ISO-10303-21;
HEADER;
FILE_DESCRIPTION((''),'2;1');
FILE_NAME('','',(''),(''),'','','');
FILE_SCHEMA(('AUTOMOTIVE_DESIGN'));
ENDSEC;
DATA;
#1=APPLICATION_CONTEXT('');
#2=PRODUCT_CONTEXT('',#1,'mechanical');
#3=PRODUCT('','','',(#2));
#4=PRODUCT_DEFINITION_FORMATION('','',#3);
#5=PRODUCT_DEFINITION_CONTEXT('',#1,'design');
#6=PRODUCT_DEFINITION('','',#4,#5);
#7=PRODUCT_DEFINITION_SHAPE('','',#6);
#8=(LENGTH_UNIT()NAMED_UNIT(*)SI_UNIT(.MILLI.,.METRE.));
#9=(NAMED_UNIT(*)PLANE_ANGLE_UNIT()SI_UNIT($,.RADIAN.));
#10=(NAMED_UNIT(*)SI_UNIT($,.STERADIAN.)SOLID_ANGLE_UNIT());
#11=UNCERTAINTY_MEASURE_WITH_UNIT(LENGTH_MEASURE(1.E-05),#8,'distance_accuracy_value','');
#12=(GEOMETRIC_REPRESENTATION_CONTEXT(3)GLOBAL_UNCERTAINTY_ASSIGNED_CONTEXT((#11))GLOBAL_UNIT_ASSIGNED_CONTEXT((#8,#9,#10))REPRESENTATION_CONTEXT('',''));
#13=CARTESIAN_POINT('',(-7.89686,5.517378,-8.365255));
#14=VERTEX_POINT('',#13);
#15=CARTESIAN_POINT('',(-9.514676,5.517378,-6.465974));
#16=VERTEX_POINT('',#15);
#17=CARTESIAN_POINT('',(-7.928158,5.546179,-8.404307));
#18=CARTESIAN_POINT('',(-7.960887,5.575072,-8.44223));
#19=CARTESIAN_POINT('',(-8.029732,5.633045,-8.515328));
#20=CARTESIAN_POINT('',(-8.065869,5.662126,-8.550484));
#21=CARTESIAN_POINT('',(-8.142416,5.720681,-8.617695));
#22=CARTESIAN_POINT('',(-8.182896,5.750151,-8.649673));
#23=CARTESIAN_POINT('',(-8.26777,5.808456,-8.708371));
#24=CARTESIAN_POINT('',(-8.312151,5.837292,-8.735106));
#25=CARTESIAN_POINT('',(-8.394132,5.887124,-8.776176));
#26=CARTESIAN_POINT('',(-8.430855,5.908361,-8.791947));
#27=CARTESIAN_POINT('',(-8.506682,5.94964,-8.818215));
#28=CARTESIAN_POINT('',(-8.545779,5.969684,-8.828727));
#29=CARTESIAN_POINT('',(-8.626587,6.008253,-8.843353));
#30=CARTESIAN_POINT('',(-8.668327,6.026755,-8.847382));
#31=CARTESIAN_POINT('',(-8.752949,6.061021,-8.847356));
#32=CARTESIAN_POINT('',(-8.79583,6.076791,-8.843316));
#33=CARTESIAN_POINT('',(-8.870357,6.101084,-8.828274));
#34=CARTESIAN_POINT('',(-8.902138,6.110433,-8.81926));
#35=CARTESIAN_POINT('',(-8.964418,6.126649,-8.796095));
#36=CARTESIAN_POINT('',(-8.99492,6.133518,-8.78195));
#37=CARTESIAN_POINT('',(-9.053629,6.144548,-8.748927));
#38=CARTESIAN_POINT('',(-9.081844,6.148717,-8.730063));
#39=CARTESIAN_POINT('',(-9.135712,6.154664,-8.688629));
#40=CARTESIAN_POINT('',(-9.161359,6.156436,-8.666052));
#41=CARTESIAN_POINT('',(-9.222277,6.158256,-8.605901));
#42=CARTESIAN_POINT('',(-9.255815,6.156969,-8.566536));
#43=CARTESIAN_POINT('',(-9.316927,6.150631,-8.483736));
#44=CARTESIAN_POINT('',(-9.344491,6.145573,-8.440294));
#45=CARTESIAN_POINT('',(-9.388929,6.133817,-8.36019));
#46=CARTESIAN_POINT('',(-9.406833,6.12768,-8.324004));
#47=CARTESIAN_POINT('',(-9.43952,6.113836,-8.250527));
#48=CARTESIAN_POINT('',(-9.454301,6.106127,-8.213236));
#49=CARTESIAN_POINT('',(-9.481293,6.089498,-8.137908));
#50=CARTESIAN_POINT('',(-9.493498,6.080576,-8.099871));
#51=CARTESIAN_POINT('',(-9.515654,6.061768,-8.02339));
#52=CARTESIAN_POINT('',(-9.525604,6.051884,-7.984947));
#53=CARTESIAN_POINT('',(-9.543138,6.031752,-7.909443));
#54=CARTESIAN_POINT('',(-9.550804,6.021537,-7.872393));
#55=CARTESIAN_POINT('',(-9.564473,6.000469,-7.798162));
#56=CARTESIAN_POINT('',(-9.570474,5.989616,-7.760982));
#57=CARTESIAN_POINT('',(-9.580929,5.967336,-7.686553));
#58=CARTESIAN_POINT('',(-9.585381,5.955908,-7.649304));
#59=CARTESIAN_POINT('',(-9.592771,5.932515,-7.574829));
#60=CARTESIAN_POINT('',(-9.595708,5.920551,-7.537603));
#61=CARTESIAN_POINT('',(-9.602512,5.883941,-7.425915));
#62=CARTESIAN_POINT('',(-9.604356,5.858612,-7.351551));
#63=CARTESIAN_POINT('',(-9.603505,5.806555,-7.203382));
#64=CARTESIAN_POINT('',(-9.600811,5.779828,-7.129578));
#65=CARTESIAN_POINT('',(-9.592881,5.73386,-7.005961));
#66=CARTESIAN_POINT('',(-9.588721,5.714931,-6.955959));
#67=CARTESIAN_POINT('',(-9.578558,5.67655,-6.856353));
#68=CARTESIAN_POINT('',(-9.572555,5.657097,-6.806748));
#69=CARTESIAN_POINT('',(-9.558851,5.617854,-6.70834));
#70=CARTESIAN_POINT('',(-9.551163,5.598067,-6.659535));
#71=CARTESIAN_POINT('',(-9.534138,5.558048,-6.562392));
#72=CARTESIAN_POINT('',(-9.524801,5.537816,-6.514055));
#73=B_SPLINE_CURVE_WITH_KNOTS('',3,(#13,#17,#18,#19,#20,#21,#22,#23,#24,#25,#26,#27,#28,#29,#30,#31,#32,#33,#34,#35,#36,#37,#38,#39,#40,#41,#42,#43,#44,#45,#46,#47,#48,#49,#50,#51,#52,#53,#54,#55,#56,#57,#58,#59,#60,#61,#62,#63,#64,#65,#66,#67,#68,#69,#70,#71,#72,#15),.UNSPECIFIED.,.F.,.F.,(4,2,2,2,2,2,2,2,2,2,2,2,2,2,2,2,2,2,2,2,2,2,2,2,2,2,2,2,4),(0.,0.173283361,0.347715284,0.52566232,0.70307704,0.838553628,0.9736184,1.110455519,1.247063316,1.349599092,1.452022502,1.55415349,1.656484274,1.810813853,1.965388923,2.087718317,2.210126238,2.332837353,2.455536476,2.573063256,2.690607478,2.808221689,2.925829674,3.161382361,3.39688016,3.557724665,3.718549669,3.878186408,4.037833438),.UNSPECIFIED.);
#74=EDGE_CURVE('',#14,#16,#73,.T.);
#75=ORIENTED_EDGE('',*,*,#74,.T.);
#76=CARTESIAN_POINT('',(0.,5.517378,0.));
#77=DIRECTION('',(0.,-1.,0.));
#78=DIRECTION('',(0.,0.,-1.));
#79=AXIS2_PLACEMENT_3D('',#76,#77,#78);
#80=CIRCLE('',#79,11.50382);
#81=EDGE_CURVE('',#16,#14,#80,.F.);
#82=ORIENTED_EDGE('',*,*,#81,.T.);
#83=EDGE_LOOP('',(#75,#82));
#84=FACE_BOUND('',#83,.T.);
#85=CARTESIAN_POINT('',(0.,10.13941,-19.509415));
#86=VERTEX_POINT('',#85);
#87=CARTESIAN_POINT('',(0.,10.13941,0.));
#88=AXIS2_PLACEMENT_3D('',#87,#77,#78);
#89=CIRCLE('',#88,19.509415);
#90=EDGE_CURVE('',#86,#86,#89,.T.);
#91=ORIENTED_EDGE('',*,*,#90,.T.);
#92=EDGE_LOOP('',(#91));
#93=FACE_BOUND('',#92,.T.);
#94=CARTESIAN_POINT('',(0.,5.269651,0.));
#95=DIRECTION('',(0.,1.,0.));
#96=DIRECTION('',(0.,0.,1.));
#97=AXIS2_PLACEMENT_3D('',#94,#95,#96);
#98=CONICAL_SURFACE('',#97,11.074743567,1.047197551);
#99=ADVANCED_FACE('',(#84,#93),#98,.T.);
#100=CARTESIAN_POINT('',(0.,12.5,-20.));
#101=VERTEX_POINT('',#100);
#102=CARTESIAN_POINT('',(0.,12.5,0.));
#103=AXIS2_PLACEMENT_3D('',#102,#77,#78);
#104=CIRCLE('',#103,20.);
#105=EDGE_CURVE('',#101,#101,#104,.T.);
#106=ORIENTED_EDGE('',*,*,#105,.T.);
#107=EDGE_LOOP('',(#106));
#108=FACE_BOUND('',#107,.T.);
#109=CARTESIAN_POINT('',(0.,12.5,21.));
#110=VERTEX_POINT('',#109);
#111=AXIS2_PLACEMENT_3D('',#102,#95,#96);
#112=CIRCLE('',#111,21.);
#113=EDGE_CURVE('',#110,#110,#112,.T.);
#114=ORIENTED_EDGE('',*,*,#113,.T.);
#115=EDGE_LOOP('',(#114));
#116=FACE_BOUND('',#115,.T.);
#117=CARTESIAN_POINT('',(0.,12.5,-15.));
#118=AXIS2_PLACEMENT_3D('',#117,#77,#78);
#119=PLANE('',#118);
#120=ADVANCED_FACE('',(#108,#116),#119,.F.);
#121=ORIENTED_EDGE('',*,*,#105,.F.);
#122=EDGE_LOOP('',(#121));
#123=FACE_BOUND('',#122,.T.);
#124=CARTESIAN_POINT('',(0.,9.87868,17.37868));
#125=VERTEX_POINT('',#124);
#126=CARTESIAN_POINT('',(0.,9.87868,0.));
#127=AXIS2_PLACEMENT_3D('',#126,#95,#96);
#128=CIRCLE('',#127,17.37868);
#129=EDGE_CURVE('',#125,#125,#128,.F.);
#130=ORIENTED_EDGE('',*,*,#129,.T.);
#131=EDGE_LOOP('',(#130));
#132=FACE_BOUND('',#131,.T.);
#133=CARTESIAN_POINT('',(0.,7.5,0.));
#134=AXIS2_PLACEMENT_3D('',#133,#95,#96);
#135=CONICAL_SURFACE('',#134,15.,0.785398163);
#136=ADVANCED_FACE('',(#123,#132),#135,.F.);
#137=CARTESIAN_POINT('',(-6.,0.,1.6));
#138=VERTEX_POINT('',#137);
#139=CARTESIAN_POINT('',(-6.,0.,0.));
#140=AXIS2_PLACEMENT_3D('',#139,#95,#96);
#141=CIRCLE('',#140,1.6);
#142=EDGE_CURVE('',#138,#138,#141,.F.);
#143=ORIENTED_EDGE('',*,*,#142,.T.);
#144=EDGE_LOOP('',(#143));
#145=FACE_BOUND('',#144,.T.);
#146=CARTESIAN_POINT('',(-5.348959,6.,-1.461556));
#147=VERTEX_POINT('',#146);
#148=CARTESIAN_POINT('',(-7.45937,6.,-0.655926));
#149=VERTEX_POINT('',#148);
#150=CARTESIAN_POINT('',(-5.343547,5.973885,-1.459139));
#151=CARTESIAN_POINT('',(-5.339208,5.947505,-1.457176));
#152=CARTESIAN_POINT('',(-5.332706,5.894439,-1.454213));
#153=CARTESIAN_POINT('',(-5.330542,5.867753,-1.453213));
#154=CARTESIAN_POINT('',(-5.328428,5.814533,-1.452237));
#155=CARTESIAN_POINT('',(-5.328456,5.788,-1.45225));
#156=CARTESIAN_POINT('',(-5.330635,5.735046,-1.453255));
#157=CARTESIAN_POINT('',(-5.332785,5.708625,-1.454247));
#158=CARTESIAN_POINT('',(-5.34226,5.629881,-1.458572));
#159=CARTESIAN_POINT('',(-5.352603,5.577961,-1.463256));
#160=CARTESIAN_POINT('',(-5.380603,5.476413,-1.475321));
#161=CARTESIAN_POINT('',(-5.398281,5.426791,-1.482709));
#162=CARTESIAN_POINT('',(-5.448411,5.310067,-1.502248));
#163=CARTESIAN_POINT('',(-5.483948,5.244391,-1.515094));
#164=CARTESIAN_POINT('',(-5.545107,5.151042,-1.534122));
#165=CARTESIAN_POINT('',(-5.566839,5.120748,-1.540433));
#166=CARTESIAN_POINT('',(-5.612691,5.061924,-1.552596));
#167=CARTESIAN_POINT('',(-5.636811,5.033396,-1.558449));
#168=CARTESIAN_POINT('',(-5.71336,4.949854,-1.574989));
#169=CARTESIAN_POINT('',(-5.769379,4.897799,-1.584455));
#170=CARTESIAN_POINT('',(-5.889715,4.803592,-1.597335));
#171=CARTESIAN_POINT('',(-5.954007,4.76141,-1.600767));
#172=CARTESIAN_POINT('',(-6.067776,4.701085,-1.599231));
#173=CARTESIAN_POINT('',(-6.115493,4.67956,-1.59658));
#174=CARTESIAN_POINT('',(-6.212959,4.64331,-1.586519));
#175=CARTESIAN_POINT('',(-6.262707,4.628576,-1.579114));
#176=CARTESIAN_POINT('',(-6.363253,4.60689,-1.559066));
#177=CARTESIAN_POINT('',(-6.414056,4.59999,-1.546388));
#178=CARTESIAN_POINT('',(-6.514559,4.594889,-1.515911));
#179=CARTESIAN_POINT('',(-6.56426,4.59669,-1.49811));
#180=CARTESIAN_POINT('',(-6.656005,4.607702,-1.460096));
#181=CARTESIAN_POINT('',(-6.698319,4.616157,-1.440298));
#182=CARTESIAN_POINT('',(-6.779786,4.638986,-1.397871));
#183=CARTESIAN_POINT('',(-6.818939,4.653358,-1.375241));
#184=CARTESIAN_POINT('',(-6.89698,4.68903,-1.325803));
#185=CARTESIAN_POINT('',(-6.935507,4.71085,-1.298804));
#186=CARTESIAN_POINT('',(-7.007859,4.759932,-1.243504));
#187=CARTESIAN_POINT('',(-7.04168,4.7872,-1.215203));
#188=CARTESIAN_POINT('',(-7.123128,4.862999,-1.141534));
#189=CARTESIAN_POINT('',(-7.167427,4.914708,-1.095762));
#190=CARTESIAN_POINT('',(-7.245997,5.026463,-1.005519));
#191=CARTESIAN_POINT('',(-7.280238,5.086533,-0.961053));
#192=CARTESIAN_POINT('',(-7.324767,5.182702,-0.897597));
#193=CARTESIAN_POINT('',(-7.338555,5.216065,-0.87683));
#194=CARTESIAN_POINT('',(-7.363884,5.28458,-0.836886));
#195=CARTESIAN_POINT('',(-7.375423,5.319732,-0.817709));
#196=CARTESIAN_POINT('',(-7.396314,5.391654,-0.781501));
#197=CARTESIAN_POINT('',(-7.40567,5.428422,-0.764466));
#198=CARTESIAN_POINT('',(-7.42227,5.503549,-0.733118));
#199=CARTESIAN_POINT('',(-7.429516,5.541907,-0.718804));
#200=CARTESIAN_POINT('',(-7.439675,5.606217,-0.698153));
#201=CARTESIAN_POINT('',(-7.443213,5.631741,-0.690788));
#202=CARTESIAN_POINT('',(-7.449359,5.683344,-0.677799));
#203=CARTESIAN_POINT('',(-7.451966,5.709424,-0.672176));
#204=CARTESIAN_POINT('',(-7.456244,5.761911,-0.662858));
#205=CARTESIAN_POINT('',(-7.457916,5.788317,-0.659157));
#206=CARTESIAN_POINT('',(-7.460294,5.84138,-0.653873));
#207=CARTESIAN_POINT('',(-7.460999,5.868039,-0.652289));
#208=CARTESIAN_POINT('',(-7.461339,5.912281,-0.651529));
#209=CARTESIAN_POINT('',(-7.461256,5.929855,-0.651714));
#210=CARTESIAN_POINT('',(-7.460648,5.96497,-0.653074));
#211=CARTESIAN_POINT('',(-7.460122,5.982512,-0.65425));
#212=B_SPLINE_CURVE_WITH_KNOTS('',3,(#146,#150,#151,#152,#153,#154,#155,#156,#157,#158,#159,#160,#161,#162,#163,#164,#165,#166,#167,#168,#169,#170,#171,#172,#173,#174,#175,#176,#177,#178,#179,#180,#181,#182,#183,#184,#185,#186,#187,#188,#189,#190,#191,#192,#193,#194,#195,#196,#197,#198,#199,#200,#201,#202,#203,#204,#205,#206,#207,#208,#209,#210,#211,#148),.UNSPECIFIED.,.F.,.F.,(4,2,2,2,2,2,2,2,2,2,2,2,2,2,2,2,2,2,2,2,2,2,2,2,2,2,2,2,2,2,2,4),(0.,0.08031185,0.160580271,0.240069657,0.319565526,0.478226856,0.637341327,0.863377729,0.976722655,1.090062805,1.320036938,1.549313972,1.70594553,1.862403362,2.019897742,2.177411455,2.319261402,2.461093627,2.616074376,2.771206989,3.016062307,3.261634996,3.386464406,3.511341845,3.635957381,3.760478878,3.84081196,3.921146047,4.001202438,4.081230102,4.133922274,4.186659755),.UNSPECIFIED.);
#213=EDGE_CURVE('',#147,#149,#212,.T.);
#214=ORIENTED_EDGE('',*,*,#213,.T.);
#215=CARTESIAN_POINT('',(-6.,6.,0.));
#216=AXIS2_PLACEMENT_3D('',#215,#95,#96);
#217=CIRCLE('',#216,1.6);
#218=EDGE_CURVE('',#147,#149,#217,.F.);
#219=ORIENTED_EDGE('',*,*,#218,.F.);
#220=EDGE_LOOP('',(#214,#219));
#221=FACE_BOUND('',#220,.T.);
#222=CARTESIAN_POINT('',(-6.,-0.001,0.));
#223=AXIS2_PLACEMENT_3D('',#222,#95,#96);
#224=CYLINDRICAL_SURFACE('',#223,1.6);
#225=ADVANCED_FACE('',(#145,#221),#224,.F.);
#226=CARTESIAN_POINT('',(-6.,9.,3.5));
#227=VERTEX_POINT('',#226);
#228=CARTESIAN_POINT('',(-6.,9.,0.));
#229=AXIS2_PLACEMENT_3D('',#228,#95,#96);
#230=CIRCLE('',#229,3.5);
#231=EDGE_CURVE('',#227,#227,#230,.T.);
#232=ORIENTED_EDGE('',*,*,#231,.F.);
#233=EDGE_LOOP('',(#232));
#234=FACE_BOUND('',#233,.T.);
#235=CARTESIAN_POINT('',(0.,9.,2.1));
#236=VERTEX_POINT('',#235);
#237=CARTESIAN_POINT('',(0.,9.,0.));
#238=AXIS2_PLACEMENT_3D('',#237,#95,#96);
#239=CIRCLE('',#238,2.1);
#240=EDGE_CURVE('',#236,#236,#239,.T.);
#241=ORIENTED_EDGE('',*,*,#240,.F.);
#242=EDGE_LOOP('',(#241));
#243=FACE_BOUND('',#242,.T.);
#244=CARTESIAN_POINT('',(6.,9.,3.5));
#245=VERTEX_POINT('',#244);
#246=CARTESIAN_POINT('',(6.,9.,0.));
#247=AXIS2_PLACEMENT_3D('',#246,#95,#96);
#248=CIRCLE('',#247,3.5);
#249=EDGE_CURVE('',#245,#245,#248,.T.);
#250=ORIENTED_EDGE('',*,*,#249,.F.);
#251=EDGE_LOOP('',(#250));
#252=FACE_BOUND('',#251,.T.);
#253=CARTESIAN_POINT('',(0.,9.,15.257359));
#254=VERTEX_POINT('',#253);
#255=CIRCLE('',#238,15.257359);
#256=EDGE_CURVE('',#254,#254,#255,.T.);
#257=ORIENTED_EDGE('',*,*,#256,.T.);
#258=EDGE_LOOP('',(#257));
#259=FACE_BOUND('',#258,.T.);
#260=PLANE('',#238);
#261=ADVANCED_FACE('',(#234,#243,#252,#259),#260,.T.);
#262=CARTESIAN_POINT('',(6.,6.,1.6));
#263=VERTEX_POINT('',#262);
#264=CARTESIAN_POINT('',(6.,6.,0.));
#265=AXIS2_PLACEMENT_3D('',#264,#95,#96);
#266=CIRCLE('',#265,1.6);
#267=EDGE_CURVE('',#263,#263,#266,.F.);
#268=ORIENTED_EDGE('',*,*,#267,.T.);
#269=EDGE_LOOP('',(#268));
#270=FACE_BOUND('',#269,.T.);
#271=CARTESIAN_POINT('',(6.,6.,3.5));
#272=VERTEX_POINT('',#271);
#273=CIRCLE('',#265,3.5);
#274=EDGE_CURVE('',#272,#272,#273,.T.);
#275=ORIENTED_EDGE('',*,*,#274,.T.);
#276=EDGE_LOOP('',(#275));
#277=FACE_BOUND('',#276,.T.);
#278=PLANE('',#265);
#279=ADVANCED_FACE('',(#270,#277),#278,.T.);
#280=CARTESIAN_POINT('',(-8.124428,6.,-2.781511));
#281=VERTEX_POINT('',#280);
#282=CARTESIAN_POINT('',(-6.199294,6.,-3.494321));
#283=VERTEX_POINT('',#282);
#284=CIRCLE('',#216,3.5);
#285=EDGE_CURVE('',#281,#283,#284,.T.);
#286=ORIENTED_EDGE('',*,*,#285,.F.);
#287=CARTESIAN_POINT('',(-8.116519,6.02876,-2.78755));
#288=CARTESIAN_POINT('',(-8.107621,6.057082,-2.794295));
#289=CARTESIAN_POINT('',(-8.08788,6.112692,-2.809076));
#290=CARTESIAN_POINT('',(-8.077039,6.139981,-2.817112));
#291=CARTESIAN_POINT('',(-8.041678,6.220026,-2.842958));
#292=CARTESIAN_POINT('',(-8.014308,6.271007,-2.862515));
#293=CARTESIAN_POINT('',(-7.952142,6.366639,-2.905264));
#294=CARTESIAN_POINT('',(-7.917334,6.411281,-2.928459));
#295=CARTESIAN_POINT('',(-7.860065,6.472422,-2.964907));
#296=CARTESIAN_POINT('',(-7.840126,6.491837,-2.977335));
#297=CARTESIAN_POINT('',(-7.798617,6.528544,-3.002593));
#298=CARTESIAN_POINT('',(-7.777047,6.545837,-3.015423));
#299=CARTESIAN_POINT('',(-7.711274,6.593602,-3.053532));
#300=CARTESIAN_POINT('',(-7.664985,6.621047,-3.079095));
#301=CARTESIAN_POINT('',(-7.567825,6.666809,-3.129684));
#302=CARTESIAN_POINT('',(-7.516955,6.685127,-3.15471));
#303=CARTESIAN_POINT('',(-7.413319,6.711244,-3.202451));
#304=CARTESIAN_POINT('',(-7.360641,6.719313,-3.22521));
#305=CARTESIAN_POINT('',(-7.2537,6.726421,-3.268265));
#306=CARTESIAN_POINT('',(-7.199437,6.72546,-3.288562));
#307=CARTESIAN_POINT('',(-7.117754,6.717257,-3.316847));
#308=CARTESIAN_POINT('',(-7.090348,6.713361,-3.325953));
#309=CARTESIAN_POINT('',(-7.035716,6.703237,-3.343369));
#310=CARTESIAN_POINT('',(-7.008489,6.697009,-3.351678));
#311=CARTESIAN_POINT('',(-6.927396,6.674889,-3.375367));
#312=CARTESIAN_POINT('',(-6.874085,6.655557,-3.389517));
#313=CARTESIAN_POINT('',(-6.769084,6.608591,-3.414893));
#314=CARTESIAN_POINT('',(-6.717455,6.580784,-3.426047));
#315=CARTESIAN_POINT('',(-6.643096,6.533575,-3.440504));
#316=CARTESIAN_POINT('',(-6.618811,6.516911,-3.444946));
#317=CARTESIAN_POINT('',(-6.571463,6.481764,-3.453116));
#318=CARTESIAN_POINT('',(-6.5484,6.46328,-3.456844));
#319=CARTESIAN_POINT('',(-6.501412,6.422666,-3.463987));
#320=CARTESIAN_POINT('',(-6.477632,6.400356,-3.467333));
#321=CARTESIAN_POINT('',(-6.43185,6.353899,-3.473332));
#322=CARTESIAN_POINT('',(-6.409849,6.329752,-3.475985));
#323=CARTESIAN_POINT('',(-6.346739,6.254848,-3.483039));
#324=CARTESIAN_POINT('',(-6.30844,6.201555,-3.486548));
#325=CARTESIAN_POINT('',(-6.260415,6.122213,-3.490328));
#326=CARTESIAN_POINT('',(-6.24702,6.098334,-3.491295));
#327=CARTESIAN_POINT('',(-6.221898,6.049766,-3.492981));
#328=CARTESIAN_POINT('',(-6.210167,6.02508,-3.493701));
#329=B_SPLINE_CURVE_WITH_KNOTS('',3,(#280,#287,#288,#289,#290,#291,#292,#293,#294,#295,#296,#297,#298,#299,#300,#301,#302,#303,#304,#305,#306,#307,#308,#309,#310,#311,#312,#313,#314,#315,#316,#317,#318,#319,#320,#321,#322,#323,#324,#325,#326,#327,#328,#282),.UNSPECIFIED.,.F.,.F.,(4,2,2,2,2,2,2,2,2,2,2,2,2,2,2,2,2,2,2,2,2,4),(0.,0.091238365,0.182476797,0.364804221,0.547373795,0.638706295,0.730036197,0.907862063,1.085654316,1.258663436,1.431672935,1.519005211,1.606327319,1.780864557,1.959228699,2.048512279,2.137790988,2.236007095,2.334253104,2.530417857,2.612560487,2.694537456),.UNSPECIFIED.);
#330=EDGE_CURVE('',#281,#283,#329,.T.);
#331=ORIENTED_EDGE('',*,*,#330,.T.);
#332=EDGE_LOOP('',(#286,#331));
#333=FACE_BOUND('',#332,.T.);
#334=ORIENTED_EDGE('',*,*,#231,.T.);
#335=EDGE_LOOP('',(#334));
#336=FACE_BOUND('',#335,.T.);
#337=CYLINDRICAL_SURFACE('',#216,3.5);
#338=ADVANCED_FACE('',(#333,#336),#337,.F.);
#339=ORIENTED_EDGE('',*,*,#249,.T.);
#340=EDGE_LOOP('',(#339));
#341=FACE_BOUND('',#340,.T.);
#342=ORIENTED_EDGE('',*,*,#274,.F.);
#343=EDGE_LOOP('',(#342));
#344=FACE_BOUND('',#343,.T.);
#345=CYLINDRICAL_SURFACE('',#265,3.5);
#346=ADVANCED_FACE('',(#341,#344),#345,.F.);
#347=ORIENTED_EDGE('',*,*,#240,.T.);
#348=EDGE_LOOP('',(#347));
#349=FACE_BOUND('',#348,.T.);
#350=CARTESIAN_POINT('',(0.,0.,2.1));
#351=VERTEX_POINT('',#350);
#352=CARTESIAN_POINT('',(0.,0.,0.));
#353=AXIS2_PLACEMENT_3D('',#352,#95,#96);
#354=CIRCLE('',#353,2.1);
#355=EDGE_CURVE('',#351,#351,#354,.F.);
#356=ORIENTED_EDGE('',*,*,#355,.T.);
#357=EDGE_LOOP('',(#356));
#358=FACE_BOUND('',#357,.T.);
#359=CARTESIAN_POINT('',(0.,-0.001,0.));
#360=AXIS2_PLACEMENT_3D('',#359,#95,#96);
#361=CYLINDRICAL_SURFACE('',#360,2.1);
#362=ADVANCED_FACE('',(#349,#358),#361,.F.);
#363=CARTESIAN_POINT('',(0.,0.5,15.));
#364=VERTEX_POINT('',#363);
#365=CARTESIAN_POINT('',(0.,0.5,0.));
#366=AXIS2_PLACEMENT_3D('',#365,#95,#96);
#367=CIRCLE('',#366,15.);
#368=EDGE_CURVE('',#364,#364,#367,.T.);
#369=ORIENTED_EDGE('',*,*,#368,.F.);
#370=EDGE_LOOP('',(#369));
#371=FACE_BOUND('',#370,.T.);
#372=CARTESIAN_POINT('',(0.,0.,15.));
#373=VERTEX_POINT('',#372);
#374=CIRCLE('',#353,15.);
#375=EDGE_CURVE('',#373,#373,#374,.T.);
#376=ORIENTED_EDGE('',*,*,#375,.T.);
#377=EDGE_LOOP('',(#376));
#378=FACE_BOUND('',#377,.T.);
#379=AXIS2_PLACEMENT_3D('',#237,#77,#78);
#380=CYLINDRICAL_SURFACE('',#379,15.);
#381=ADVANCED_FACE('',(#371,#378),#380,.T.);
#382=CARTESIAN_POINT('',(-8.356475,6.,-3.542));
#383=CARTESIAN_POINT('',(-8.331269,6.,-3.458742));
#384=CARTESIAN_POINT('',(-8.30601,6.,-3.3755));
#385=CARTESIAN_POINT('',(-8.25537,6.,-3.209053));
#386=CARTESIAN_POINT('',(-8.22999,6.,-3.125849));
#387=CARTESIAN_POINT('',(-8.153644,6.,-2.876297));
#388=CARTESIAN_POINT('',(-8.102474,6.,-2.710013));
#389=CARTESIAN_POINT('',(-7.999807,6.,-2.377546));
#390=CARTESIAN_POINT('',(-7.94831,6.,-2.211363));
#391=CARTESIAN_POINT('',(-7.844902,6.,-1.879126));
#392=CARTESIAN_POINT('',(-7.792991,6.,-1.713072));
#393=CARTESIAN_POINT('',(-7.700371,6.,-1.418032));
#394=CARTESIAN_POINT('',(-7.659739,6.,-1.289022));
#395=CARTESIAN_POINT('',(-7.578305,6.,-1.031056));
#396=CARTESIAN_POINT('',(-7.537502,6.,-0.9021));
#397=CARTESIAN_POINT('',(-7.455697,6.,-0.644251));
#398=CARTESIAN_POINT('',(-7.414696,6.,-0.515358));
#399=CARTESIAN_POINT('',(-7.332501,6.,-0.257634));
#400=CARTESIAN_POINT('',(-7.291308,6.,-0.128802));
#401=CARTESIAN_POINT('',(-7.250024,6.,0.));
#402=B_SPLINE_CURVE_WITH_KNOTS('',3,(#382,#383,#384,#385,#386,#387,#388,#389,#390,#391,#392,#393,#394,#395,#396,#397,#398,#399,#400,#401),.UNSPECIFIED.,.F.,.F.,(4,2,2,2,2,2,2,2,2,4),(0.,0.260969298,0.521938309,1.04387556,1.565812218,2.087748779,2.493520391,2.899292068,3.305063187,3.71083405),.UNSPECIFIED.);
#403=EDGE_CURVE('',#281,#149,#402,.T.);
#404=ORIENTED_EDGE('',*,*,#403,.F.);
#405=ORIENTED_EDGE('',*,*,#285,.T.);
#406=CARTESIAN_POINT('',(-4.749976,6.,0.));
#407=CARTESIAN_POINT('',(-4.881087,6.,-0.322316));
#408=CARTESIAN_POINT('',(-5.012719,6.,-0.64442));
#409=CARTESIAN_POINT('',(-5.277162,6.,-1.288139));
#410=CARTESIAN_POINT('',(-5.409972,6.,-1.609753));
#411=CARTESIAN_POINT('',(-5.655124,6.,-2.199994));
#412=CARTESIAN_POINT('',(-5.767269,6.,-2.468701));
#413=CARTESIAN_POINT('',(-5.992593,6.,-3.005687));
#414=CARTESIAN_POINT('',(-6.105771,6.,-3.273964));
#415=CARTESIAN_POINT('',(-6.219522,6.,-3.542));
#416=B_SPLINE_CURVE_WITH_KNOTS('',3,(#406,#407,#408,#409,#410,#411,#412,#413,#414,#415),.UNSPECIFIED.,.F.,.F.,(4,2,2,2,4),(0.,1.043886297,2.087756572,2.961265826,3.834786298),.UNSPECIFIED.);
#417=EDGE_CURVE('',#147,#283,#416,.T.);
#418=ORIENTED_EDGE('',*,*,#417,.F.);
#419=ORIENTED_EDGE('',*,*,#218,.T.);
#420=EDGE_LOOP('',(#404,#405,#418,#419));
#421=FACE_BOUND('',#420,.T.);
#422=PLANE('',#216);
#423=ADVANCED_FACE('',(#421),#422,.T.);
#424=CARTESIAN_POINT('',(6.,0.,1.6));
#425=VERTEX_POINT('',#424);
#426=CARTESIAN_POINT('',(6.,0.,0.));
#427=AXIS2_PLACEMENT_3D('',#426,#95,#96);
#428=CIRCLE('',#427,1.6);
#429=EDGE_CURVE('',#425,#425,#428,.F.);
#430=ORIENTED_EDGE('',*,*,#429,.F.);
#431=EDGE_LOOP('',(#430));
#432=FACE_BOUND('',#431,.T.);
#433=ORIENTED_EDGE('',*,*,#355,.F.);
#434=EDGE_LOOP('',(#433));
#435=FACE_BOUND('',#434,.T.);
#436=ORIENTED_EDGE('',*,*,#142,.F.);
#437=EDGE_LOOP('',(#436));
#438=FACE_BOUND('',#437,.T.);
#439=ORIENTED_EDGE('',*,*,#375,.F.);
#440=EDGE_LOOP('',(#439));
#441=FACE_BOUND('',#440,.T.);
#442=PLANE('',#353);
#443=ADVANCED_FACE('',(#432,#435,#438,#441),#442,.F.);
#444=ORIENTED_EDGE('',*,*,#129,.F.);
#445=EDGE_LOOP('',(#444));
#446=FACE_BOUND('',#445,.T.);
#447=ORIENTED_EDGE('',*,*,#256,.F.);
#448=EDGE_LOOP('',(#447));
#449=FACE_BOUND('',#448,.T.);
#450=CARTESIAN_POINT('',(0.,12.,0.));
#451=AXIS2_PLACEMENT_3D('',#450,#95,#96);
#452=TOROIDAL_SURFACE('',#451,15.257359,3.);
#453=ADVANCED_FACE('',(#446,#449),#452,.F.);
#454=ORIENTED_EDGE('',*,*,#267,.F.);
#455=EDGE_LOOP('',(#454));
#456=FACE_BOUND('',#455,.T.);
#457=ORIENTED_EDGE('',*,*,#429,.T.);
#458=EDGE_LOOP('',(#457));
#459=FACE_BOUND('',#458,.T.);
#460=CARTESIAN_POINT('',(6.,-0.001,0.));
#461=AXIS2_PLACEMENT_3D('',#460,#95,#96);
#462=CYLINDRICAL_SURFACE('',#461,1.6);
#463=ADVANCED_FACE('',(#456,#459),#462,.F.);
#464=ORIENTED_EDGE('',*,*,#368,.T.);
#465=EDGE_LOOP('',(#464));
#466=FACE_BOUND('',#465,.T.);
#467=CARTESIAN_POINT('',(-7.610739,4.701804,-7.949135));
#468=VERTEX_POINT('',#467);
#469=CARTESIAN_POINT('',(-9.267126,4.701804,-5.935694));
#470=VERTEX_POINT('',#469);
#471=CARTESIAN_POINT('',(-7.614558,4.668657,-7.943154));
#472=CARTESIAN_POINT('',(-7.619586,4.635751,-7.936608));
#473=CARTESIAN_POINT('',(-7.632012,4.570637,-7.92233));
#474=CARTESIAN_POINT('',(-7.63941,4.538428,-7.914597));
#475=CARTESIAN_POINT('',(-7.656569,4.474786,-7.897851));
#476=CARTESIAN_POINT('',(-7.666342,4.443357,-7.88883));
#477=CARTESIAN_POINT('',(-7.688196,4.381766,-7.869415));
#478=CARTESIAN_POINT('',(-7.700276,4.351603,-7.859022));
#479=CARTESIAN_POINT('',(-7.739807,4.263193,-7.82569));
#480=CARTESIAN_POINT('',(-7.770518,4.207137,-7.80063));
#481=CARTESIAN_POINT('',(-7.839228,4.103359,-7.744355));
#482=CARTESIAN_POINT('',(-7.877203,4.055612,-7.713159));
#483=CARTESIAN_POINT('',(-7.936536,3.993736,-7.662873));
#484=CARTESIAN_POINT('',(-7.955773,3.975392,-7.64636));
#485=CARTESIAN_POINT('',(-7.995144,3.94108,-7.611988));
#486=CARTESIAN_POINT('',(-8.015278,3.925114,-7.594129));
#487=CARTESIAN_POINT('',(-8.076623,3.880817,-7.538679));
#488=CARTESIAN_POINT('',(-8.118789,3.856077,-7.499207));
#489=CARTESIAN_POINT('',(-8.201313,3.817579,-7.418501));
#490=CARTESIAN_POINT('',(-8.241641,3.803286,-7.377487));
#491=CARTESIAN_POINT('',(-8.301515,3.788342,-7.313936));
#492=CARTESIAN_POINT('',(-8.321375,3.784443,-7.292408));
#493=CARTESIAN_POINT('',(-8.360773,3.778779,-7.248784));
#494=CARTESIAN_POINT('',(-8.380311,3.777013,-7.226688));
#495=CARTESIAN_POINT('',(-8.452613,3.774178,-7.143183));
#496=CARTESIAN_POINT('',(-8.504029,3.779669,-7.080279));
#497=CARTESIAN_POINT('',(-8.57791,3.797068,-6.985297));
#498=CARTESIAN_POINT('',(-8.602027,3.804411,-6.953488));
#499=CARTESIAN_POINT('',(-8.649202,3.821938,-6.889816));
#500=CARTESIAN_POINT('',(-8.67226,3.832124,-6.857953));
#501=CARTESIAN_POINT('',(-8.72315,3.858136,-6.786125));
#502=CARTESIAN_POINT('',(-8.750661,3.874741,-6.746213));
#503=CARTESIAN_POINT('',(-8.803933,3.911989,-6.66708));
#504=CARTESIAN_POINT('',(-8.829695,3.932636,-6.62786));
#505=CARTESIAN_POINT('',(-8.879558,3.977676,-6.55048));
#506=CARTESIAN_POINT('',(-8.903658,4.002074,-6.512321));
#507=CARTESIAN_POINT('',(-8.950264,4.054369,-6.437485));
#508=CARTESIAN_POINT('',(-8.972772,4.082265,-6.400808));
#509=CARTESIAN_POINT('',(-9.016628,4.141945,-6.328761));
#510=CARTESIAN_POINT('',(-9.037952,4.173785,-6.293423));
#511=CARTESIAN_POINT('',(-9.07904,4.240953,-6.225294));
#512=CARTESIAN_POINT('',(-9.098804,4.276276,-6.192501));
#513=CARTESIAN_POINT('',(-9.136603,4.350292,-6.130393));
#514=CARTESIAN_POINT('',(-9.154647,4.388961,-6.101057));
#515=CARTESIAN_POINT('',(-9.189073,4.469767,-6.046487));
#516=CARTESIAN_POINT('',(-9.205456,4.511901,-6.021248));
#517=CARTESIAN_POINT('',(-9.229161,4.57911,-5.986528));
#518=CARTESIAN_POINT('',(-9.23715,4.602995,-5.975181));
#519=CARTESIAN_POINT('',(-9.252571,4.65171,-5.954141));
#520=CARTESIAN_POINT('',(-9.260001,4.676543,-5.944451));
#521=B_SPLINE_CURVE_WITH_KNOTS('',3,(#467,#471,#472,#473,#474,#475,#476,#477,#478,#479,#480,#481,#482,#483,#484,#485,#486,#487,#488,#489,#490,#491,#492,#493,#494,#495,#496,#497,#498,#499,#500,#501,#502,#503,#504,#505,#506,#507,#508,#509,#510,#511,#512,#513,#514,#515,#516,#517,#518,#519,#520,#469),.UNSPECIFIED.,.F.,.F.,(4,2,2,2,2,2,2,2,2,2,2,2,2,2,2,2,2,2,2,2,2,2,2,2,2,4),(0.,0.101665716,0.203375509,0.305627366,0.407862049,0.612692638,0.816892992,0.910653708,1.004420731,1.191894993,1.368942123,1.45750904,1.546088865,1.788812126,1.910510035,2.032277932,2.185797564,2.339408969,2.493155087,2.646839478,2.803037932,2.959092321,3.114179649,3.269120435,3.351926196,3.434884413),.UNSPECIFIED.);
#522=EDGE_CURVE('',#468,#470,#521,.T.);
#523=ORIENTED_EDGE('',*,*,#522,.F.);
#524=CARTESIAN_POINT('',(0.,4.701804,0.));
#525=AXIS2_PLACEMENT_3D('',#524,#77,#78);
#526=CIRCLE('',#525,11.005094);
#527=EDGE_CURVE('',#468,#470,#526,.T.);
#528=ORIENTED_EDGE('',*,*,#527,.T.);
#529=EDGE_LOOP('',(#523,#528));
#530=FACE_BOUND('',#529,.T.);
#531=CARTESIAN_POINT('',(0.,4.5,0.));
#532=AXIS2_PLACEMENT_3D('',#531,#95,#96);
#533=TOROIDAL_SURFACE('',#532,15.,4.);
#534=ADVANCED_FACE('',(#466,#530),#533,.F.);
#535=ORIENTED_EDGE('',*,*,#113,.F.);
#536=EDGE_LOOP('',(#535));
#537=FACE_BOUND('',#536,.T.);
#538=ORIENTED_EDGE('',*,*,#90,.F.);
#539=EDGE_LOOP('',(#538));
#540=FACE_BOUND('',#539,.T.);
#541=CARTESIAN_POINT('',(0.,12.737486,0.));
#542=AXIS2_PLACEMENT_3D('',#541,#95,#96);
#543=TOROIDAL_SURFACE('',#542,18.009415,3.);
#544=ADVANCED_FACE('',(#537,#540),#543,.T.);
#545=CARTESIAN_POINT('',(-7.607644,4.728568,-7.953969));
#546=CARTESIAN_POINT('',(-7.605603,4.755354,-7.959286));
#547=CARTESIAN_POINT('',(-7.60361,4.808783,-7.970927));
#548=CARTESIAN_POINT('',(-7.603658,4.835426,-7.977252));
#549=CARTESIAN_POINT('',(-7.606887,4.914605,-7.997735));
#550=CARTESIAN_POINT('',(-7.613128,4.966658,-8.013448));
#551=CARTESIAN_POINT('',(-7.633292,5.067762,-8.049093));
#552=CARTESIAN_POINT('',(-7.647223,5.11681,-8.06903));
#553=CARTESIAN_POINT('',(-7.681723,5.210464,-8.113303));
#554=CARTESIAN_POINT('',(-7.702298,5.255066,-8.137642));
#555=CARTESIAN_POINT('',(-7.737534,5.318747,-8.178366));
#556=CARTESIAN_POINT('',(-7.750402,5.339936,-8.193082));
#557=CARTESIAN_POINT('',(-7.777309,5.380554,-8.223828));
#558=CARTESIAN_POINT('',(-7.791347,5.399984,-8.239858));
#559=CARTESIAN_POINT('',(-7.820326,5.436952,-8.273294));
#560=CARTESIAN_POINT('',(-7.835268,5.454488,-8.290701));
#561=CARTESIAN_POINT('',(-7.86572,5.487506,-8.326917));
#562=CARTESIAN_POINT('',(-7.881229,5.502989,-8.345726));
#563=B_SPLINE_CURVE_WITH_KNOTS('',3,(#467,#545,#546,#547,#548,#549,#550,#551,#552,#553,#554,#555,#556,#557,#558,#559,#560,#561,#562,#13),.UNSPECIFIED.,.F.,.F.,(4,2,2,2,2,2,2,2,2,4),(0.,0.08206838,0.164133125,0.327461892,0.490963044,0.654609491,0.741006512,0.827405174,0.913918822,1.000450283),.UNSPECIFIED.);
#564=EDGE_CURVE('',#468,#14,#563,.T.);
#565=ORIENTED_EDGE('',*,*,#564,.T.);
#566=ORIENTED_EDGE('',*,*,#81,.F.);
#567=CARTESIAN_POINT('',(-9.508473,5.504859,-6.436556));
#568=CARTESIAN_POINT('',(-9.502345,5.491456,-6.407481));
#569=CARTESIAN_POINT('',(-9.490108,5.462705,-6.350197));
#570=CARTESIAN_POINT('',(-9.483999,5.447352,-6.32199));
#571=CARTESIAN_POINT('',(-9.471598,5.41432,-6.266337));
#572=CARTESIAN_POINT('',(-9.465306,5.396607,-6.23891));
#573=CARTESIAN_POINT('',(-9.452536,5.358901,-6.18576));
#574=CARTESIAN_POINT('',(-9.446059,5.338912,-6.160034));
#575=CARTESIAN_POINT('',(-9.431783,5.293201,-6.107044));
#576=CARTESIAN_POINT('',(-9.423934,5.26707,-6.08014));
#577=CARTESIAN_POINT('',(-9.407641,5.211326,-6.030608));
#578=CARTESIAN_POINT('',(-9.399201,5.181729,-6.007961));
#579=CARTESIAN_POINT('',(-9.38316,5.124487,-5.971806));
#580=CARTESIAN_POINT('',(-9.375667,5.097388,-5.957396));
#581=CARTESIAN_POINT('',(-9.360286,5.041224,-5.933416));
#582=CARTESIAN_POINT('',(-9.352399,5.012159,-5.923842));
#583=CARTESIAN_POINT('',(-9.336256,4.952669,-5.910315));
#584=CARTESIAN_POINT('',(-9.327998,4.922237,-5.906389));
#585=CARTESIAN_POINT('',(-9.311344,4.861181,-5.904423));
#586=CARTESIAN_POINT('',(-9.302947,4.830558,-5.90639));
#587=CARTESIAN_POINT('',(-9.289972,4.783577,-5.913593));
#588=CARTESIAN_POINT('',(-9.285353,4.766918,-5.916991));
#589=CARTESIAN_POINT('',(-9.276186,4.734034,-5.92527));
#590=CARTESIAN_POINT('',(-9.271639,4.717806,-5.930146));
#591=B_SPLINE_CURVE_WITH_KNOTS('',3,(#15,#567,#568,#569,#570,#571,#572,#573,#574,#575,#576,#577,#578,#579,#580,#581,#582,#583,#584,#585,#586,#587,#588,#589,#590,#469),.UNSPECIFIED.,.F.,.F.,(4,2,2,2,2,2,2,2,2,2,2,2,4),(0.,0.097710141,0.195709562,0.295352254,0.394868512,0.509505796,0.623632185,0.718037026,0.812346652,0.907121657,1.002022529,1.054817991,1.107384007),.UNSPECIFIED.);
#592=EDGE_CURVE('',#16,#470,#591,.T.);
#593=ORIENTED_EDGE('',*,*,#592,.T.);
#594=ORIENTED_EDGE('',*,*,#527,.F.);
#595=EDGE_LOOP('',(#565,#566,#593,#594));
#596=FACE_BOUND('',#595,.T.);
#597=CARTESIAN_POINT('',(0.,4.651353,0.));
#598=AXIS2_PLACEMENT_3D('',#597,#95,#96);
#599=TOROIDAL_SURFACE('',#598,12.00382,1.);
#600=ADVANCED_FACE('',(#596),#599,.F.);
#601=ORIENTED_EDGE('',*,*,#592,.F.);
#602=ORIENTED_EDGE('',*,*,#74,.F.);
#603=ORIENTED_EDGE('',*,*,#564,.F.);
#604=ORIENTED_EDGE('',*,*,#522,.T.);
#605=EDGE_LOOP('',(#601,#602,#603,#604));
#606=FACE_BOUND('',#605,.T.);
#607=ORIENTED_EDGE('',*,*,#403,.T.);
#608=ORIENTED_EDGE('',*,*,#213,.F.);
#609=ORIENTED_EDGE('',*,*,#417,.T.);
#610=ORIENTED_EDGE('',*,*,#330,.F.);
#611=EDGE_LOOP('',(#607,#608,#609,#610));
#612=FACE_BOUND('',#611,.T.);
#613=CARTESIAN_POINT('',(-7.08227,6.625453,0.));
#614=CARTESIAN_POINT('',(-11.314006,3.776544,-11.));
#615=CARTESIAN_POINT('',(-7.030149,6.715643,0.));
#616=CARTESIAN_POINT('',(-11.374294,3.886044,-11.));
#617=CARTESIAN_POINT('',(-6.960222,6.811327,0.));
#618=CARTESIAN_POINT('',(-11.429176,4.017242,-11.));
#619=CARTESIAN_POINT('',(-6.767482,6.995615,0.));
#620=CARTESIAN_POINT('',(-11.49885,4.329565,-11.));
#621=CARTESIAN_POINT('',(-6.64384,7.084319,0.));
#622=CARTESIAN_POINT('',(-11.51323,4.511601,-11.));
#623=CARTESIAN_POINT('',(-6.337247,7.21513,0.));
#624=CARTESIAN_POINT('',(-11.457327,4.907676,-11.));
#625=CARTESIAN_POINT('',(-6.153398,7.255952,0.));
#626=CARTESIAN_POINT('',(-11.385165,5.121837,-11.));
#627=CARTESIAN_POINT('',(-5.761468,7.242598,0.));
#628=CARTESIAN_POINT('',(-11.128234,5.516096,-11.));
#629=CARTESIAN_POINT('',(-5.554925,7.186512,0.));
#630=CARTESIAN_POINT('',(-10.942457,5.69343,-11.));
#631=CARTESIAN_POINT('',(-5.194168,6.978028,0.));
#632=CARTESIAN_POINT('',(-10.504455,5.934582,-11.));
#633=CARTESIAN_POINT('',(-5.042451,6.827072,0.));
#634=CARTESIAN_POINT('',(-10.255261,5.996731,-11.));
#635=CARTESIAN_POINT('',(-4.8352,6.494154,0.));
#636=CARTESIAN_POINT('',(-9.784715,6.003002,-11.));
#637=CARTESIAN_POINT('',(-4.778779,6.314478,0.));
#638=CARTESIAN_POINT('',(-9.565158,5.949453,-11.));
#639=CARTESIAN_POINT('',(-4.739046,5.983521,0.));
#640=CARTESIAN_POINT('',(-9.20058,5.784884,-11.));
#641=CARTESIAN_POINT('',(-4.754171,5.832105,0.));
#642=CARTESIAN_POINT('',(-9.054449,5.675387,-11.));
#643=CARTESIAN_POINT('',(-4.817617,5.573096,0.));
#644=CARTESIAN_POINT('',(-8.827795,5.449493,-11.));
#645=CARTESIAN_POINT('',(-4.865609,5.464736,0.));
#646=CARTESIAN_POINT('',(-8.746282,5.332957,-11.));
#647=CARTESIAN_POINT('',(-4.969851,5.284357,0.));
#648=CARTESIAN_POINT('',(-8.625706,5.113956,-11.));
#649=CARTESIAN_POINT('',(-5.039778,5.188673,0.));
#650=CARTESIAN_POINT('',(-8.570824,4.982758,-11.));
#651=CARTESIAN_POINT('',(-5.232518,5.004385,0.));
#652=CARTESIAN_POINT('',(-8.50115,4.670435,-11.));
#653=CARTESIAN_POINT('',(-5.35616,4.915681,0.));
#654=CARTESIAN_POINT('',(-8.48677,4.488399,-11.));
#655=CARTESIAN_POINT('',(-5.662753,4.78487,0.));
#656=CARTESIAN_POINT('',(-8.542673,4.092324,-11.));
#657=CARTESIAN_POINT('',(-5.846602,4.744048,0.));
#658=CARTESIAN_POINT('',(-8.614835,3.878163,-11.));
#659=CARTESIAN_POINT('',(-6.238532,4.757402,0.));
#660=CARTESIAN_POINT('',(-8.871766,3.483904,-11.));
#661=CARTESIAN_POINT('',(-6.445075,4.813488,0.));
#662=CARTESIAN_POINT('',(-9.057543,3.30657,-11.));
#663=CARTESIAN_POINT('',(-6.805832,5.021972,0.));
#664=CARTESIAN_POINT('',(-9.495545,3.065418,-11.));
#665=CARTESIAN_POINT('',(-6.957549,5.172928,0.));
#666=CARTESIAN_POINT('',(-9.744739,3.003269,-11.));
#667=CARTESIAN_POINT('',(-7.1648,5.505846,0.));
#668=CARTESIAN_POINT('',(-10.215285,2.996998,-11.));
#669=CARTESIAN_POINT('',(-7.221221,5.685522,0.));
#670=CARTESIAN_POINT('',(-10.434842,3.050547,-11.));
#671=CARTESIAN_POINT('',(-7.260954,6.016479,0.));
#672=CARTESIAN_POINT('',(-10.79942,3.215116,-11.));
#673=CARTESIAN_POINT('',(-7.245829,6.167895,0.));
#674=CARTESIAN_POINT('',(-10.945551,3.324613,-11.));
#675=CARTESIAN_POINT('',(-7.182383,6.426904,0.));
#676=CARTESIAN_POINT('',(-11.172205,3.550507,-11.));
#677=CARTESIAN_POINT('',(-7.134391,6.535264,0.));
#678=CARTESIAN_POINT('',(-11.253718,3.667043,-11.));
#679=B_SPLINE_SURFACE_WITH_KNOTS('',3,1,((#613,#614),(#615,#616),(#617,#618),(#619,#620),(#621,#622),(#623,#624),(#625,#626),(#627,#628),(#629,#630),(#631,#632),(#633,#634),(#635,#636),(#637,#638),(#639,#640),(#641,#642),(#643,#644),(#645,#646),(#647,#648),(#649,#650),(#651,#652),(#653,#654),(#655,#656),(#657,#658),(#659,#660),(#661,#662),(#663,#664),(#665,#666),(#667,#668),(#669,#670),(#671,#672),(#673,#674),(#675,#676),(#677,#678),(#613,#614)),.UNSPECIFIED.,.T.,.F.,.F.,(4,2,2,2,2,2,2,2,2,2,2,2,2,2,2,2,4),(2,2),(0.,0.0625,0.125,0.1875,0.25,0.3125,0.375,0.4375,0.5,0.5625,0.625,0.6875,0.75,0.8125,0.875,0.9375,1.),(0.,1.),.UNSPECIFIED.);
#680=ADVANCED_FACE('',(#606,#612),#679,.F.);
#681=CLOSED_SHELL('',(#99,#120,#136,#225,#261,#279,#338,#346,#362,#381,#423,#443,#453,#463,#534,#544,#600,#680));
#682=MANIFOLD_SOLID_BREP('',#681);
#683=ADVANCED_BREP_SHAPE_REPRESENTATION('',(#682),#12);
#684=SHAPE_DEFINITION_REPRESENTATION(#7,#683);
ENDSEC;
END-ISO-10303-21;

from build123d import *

# Parameters (mm, degrees)
SKETCH_1_R          = 15
EXTRUDE_1_DEPTH     = 9
CUT_EXTRUDE_1_REACH = 25.043
SKETCH_2_R          = 2.1
CUT_EXTRUDE_2_REACH = 25.043
SKETCH_3_R          = 1.6
SKETCH_4_R          = 3.5
CUT_EXTRUDE_3_DEPTH = 3
SKETCH_5_R          = 4
CHAMFER_1_SIZE      = 5
FILLET_2_R          = 1


with BuildPart() as part:
    # 草图1 → 凸台-拉伸1 (new body)
    with BuildSketch(Plane(origin=(0, 0, 0), x_dir=(1, 0, 0), z_dir=(0, 1, 0))):
        with Locations(Location((0, 0, 0), (0, 0, 270))):
            Circle(SKETCH_1_R)
    extrude(amount=EXTRUDE_1_DEPTH)

    # 草图2 → 切除-拉伸1 (cut, up to next)
    with BuildSketch(Plane(origin=(0, 9, 0), x_dir=(1, 0, 0), z_dir=(0, 1, 0)), mode=Mode.PRIVATE) as cut_extrude_1_sk1:
        with Locations(Location((0, 0, 0), (0, 0, 270))):
            Circle(SKETCH_2_R)
    cut_extrude_1_tool1 = extrude(cut_extrude_1_sk1.sketch, amount=-CUT_EXTRUDE_1_REACH, mode=Mode.PRIVATE) & part.part
    add(cut_extrude_1_tool1.solids().sort_by_distance((0, 9, 0))[0], mode=Mode.SUBTRACT)

    # 草图3 → 切除-拉伸2 (cut, up to next)
    with BuildSketch(Plane(origin=(0, 9, 0), x_dir=(1, 0, 0), z_dir=(0, 1, 0)), mode=Mode.PRIVATE) as cut_extrude_2_sk1:
        with Locations(Location((-6, 0, 0), (0, 0, 270))):
            Circle(SKETCH_3_R)
    cut_extrude_2_tool1 = extrude(cut_extrude_2_sk1.sketch, amount=-CUT_EXTRUDE_2_REACH, mode=Mode.PRIVATE) & part.part
    # 草图3 → 切除-拉伸2 (cut, up to next)
    with BuildSketch(Plane(origin=(0, 9, 0), x_dir=(1, 0, 0), z_dir=(0, 1, 0)), mode=Mode.PRIVATE) as cut_extrude_2_sk2:
        with Locations(Location((6, 0, 0), (0, 0, 270))):
            Circle(SKETCH_3_R)
    cut_extrude_2_tool2 = extrude(cut_extrude_2_sk2.sketch, amount=-CUT_EXTRUDE_2_REACH, mode=Mode.PRIVATE) & part.part
    add(cut_extrude_2_tool1.solids().sort_by_distance((-6, 9, 0))[0], mode=Mode.SUBTRACT)
    add(cut_extrude_2_tool2.solids().sort_by_distance((6, 9, 0))[0], mode=Mode.SUBTRACT)

    # 草图4 → 切除-拉伸3 (cut)
    with BuildSketch(Plane(origin=(0, 9, 0), x_dir=(1, 0, 0), z_dir=(0, 1, 0))):
        with Locations(Location((-6, 0, 0), (0, 0, 270))):
            Circle(SKETCH_4_R)
        with Locations(Location((6, 0, 0), (0, 0, 270))):
            Circle(SKETCH_4_R)
    extrude(amount=-CUT_EXTRUDE_3_DEPTH, mode=Mode.SUBTRACT)

    # 草图5 → 切除-旋转1 (revolve, cut)
    with BuildSketch(Plane.XY, mode=Mode.PRIVATE) as cut_revolve_1_sk:
        with Locations((15, 4.5)):
            Circle(SKETCH_5_R)
    revolve(cut_revolve_1_sk.sketch.rotate(Axis((0, 9, 0), (0, -1, 0)), 90), axis=Axis((0, 9, 0), (0, -1, 0)), mode=Mode.SUBTRACT)

    # 草图8 → 旋转1 (revolve)
    with BuildSketch(Plane(origin=(0, 0, 0), x_dir=(0, 0, -1), z_dir=(1, 0, 0)), mode=Mode.PRIVATE) as revolve_1_sk:
        with BuildLine():
            Line((15, 9), (15, 12.5))
            Line((15, 12.5), (21, 12.5))
            Line((21, 12.5), (21, 11))
            Line((21, 11), (11.074743567, 5.269650526))
            ThreePointArc((11.074743567, 5.269650526), (12.4582095, 7.588575894), (15, 8.5))
            Line((15, 8.5), (15, 9))
        make_face()
    revolve(revolve_1_sk.sketch.rotate(Axis((0, 14.925695769, 0), (0, -1, 0)), 180), axis=Axis((0, 14.925695769, 0), (0, -1, 0)))

    # 倒角1
    # the kernel refuses this chamfer: 5 mm, written as the material it takes off along each edge
    with BuildSketch(Plane(origin=(0, 12.5, 0), x_dir=(0, 0, 1), z_dir=(1, 0, 0))) as chamfer_1_piece_1_section:
        Polygon((15, CHAMFER_1_SIZE), (15 + CHAMFER_1_SIZE, 0), (15, 0), align=None)
    chamfer_1_piece_1 = revolve(axis=Axis((0, 12.5, 0), (0, -1, 0)), mode=Mode.PRIVATE)
    chamfer_1_piece_1 = split(chamfer_1_piece_1, bisect_by=Plane(origin=(0, 9, 0), z_dir=(0, 1, 0)), keep=Keep.TOP, mode=Mode.PRIVATE)
    add(chamfer_1_piece_1, mode=Mode.SUBTRACT)

    # 圆角1: read off the stored shape, not the designer's step
    # 圆角1 outline → 圆角1 (revolve, cut)
    with BuildSketch(Plane.XY):
        with BuildLine():
            Line((19.509414739, 10.139410198), (21, 10.139410198))
            Line((21, 10.139410198), (21, 12.5))
            ThreePointArc((21, 12.5), (20.546033561, 11.135748307), (19.509414739, 10.139410198))
        make_face()
    revolve(axis=Axis((0, 0, 0), (0, 1, 0)), mode=Mode.SUBTRACT)

    # Fillet 1 2 outline → Fillet 1 2 (revolve)
    with BuildSketch(Plane.XY):
        with BuildLine():
            Line((17.378679656, 9), (17.378679656, 9.878679656))
            ThreePointArc((17.378679656, 9.878679656), (16.40540961, 9.228361402), (15.257359313, 9))
            Line((15.257359313, 9), (17.378679656, 9))
        make_face()
    revolve(axis=Axis((0, 0, 0), (0, 1, 0)))

    # 圆角2
    fillet_2_edges = [part.edges().sort_by_distance(p)[0] for p in [
        (0, 5.269650526, -11.074743567),
    ]]
    fillet(fillet_2_edges, radius=FILLET_2_R)

    # 切除-放样1: read off the stored shape, not the designer's step
    # 切除-放样1: loft between two sections, ruled curve by curve
    loft_1_from = [
        Edge.make_bspline([(-7.08226986, 6.625453395, 0), (-7.030148744, 6.71564255, 0), (-6.960222336, 6.811326594, 0), (-6.767481895, 6.995615046, 0), (-6.643840469, 7.084318785, 0), (-6.337247234, 7.215130479, 0), (-6.153397528, 7.255952208, 0), (-5.761468115, 7.242597799, 0), (-5.554924915, 7.186512093, 0), (-5.194168295, 6.978027628, 0), (-5.04245146, 6.827071668, 0), (-4.835200327, 6.494154302, 0), (-4.778778635, 6.31447759, 0), (-4.739045515, 5.98352081, 0), (-4.754171349, 5.832104943, 0), (-4.817616618, 5.57309566, 0), (-4.865609023, 5.46473576, 0), (-4.969851256, 5.28435745, 0), (-5.039777664, 5.188673406, 0), (-5.232518105, 5.004384954, 0), (-5.356159531, 4.915681215, 0), (-5.662752766, 4.784869521, 0), (-5.846602472, 4.744047792, 0), (-6.238531885, 4.757402201, 0), (-6.445075085, 4.813487907, 0), (-6.805831705, 5.021972372, 0), (-6.95754854, 5.172928332, 0), (-7.164799673, 5.505845698, 0), (-7.221221365, 5.68552241, 0), (-7.260954485, 6.01647919, 0), (-7.245828651, 6.167895057, 0), (-7.182383382, 6.42690434, 0), (-7.134390977, 6.53526424, 0), (-7.08226986, 6.625453395, 0)], [0, 0, 0, 0, 0.0625, 0.0625, 0.125, 0.125, 0.1875, 0.1875, 0.25, 0.25, 0.3125, 0.3125, 0.375, 0.375, 0.4375, 0.4375, 0.5, 0.5, 0.5625, 0.5625, 0.625, 0.625, 0.6875, 0.6875, 0.75, 0.75, 0.8125, 0.8125, 0.875, 0.875, 0.9375, 0.9375, 1, 1, 1, 1], 3),
    ]
    loft_1_to = [
        Edge.make_bspline([(-11.314005718, 3.776543732, -11), (-11.374293741, 3.886044208, -11), (-11.429176294, 4.017242171, -11), (-11.498850196, 4.329564997, -11), (-11.513230125, 4.511601305, -11), (-11.457326547, 4.907675528, -11), (-11.385164779, 5.121837485, -11), (-11.128234017, 5.516096119, -11), (-10.942457221, 5.693429674, -11), (-10.504455315, 5.934581763, -11), (-10.25526136, 5.996731425, -11), (-9.784714907, 6.003002212, -11), (-9.565158312, 5.949452554, -11), (-9.20058006, 5.784884337, -11), (-9.054449158, 5.675386577, -11), (-8.827795373, 5.44949266, -11), (-8.746282304, 5.332956745, -11), (-8.625706259, 5.113955792, -11), (-8.570823706, 4.982757829, -11), (-8.501149804, 4.670435003, -11), (-8.486769875, 4.488398695, -11), (-8.542673453, 4.092324472, -11), (-8.614835221, 3.878162515, -11), (-8.871765983, 3.483903881, -11), (-9.057542779, 3.306570326, -11), (-9.495544685, 3.065418237, -11), (-9.74473864, 3.003268575, -11), (-10.215285093, 2.996997788, -11), (-10.434841688, 3.050547446, -11), (-10.79941994, 3.215115663, -11), (-10.945550842, 3.324613423, -11), (-11.172204627, 3.55050734, -11), (-11.253717696, 3.667043255, -11), (-11.314005718, 3.776543732, -11)], [0, 0, 0, 0, 0.0625, 0.0625, 0.125, 0.125, 0.1875, 0.1875, 0.25, 0.25, 0.3125, 0.3125, 0.375, 0.375, 0.4375, 0.4375, 0.5, 0.5, 0.5625, 0.5625, 0.625, 0.625, 0.6875, 0.6875, 0.75, 0.75, 0.8125, 0.8125, 0.875, 0.875, 0.9375, 0.9375, 1, 1, 1, 1], 3),
    ]
    loft_1 = Solid(Shell([*[Face.make_surface_from_curves(loft_1_from[k], loft_1_to[k]) for k in range(1)], Face(Wire(loft_1_from)), Face(Wire(loft_1_to))]))
    add(loft_1, mode=Mode.SUBTRACT)


solid = part.part
